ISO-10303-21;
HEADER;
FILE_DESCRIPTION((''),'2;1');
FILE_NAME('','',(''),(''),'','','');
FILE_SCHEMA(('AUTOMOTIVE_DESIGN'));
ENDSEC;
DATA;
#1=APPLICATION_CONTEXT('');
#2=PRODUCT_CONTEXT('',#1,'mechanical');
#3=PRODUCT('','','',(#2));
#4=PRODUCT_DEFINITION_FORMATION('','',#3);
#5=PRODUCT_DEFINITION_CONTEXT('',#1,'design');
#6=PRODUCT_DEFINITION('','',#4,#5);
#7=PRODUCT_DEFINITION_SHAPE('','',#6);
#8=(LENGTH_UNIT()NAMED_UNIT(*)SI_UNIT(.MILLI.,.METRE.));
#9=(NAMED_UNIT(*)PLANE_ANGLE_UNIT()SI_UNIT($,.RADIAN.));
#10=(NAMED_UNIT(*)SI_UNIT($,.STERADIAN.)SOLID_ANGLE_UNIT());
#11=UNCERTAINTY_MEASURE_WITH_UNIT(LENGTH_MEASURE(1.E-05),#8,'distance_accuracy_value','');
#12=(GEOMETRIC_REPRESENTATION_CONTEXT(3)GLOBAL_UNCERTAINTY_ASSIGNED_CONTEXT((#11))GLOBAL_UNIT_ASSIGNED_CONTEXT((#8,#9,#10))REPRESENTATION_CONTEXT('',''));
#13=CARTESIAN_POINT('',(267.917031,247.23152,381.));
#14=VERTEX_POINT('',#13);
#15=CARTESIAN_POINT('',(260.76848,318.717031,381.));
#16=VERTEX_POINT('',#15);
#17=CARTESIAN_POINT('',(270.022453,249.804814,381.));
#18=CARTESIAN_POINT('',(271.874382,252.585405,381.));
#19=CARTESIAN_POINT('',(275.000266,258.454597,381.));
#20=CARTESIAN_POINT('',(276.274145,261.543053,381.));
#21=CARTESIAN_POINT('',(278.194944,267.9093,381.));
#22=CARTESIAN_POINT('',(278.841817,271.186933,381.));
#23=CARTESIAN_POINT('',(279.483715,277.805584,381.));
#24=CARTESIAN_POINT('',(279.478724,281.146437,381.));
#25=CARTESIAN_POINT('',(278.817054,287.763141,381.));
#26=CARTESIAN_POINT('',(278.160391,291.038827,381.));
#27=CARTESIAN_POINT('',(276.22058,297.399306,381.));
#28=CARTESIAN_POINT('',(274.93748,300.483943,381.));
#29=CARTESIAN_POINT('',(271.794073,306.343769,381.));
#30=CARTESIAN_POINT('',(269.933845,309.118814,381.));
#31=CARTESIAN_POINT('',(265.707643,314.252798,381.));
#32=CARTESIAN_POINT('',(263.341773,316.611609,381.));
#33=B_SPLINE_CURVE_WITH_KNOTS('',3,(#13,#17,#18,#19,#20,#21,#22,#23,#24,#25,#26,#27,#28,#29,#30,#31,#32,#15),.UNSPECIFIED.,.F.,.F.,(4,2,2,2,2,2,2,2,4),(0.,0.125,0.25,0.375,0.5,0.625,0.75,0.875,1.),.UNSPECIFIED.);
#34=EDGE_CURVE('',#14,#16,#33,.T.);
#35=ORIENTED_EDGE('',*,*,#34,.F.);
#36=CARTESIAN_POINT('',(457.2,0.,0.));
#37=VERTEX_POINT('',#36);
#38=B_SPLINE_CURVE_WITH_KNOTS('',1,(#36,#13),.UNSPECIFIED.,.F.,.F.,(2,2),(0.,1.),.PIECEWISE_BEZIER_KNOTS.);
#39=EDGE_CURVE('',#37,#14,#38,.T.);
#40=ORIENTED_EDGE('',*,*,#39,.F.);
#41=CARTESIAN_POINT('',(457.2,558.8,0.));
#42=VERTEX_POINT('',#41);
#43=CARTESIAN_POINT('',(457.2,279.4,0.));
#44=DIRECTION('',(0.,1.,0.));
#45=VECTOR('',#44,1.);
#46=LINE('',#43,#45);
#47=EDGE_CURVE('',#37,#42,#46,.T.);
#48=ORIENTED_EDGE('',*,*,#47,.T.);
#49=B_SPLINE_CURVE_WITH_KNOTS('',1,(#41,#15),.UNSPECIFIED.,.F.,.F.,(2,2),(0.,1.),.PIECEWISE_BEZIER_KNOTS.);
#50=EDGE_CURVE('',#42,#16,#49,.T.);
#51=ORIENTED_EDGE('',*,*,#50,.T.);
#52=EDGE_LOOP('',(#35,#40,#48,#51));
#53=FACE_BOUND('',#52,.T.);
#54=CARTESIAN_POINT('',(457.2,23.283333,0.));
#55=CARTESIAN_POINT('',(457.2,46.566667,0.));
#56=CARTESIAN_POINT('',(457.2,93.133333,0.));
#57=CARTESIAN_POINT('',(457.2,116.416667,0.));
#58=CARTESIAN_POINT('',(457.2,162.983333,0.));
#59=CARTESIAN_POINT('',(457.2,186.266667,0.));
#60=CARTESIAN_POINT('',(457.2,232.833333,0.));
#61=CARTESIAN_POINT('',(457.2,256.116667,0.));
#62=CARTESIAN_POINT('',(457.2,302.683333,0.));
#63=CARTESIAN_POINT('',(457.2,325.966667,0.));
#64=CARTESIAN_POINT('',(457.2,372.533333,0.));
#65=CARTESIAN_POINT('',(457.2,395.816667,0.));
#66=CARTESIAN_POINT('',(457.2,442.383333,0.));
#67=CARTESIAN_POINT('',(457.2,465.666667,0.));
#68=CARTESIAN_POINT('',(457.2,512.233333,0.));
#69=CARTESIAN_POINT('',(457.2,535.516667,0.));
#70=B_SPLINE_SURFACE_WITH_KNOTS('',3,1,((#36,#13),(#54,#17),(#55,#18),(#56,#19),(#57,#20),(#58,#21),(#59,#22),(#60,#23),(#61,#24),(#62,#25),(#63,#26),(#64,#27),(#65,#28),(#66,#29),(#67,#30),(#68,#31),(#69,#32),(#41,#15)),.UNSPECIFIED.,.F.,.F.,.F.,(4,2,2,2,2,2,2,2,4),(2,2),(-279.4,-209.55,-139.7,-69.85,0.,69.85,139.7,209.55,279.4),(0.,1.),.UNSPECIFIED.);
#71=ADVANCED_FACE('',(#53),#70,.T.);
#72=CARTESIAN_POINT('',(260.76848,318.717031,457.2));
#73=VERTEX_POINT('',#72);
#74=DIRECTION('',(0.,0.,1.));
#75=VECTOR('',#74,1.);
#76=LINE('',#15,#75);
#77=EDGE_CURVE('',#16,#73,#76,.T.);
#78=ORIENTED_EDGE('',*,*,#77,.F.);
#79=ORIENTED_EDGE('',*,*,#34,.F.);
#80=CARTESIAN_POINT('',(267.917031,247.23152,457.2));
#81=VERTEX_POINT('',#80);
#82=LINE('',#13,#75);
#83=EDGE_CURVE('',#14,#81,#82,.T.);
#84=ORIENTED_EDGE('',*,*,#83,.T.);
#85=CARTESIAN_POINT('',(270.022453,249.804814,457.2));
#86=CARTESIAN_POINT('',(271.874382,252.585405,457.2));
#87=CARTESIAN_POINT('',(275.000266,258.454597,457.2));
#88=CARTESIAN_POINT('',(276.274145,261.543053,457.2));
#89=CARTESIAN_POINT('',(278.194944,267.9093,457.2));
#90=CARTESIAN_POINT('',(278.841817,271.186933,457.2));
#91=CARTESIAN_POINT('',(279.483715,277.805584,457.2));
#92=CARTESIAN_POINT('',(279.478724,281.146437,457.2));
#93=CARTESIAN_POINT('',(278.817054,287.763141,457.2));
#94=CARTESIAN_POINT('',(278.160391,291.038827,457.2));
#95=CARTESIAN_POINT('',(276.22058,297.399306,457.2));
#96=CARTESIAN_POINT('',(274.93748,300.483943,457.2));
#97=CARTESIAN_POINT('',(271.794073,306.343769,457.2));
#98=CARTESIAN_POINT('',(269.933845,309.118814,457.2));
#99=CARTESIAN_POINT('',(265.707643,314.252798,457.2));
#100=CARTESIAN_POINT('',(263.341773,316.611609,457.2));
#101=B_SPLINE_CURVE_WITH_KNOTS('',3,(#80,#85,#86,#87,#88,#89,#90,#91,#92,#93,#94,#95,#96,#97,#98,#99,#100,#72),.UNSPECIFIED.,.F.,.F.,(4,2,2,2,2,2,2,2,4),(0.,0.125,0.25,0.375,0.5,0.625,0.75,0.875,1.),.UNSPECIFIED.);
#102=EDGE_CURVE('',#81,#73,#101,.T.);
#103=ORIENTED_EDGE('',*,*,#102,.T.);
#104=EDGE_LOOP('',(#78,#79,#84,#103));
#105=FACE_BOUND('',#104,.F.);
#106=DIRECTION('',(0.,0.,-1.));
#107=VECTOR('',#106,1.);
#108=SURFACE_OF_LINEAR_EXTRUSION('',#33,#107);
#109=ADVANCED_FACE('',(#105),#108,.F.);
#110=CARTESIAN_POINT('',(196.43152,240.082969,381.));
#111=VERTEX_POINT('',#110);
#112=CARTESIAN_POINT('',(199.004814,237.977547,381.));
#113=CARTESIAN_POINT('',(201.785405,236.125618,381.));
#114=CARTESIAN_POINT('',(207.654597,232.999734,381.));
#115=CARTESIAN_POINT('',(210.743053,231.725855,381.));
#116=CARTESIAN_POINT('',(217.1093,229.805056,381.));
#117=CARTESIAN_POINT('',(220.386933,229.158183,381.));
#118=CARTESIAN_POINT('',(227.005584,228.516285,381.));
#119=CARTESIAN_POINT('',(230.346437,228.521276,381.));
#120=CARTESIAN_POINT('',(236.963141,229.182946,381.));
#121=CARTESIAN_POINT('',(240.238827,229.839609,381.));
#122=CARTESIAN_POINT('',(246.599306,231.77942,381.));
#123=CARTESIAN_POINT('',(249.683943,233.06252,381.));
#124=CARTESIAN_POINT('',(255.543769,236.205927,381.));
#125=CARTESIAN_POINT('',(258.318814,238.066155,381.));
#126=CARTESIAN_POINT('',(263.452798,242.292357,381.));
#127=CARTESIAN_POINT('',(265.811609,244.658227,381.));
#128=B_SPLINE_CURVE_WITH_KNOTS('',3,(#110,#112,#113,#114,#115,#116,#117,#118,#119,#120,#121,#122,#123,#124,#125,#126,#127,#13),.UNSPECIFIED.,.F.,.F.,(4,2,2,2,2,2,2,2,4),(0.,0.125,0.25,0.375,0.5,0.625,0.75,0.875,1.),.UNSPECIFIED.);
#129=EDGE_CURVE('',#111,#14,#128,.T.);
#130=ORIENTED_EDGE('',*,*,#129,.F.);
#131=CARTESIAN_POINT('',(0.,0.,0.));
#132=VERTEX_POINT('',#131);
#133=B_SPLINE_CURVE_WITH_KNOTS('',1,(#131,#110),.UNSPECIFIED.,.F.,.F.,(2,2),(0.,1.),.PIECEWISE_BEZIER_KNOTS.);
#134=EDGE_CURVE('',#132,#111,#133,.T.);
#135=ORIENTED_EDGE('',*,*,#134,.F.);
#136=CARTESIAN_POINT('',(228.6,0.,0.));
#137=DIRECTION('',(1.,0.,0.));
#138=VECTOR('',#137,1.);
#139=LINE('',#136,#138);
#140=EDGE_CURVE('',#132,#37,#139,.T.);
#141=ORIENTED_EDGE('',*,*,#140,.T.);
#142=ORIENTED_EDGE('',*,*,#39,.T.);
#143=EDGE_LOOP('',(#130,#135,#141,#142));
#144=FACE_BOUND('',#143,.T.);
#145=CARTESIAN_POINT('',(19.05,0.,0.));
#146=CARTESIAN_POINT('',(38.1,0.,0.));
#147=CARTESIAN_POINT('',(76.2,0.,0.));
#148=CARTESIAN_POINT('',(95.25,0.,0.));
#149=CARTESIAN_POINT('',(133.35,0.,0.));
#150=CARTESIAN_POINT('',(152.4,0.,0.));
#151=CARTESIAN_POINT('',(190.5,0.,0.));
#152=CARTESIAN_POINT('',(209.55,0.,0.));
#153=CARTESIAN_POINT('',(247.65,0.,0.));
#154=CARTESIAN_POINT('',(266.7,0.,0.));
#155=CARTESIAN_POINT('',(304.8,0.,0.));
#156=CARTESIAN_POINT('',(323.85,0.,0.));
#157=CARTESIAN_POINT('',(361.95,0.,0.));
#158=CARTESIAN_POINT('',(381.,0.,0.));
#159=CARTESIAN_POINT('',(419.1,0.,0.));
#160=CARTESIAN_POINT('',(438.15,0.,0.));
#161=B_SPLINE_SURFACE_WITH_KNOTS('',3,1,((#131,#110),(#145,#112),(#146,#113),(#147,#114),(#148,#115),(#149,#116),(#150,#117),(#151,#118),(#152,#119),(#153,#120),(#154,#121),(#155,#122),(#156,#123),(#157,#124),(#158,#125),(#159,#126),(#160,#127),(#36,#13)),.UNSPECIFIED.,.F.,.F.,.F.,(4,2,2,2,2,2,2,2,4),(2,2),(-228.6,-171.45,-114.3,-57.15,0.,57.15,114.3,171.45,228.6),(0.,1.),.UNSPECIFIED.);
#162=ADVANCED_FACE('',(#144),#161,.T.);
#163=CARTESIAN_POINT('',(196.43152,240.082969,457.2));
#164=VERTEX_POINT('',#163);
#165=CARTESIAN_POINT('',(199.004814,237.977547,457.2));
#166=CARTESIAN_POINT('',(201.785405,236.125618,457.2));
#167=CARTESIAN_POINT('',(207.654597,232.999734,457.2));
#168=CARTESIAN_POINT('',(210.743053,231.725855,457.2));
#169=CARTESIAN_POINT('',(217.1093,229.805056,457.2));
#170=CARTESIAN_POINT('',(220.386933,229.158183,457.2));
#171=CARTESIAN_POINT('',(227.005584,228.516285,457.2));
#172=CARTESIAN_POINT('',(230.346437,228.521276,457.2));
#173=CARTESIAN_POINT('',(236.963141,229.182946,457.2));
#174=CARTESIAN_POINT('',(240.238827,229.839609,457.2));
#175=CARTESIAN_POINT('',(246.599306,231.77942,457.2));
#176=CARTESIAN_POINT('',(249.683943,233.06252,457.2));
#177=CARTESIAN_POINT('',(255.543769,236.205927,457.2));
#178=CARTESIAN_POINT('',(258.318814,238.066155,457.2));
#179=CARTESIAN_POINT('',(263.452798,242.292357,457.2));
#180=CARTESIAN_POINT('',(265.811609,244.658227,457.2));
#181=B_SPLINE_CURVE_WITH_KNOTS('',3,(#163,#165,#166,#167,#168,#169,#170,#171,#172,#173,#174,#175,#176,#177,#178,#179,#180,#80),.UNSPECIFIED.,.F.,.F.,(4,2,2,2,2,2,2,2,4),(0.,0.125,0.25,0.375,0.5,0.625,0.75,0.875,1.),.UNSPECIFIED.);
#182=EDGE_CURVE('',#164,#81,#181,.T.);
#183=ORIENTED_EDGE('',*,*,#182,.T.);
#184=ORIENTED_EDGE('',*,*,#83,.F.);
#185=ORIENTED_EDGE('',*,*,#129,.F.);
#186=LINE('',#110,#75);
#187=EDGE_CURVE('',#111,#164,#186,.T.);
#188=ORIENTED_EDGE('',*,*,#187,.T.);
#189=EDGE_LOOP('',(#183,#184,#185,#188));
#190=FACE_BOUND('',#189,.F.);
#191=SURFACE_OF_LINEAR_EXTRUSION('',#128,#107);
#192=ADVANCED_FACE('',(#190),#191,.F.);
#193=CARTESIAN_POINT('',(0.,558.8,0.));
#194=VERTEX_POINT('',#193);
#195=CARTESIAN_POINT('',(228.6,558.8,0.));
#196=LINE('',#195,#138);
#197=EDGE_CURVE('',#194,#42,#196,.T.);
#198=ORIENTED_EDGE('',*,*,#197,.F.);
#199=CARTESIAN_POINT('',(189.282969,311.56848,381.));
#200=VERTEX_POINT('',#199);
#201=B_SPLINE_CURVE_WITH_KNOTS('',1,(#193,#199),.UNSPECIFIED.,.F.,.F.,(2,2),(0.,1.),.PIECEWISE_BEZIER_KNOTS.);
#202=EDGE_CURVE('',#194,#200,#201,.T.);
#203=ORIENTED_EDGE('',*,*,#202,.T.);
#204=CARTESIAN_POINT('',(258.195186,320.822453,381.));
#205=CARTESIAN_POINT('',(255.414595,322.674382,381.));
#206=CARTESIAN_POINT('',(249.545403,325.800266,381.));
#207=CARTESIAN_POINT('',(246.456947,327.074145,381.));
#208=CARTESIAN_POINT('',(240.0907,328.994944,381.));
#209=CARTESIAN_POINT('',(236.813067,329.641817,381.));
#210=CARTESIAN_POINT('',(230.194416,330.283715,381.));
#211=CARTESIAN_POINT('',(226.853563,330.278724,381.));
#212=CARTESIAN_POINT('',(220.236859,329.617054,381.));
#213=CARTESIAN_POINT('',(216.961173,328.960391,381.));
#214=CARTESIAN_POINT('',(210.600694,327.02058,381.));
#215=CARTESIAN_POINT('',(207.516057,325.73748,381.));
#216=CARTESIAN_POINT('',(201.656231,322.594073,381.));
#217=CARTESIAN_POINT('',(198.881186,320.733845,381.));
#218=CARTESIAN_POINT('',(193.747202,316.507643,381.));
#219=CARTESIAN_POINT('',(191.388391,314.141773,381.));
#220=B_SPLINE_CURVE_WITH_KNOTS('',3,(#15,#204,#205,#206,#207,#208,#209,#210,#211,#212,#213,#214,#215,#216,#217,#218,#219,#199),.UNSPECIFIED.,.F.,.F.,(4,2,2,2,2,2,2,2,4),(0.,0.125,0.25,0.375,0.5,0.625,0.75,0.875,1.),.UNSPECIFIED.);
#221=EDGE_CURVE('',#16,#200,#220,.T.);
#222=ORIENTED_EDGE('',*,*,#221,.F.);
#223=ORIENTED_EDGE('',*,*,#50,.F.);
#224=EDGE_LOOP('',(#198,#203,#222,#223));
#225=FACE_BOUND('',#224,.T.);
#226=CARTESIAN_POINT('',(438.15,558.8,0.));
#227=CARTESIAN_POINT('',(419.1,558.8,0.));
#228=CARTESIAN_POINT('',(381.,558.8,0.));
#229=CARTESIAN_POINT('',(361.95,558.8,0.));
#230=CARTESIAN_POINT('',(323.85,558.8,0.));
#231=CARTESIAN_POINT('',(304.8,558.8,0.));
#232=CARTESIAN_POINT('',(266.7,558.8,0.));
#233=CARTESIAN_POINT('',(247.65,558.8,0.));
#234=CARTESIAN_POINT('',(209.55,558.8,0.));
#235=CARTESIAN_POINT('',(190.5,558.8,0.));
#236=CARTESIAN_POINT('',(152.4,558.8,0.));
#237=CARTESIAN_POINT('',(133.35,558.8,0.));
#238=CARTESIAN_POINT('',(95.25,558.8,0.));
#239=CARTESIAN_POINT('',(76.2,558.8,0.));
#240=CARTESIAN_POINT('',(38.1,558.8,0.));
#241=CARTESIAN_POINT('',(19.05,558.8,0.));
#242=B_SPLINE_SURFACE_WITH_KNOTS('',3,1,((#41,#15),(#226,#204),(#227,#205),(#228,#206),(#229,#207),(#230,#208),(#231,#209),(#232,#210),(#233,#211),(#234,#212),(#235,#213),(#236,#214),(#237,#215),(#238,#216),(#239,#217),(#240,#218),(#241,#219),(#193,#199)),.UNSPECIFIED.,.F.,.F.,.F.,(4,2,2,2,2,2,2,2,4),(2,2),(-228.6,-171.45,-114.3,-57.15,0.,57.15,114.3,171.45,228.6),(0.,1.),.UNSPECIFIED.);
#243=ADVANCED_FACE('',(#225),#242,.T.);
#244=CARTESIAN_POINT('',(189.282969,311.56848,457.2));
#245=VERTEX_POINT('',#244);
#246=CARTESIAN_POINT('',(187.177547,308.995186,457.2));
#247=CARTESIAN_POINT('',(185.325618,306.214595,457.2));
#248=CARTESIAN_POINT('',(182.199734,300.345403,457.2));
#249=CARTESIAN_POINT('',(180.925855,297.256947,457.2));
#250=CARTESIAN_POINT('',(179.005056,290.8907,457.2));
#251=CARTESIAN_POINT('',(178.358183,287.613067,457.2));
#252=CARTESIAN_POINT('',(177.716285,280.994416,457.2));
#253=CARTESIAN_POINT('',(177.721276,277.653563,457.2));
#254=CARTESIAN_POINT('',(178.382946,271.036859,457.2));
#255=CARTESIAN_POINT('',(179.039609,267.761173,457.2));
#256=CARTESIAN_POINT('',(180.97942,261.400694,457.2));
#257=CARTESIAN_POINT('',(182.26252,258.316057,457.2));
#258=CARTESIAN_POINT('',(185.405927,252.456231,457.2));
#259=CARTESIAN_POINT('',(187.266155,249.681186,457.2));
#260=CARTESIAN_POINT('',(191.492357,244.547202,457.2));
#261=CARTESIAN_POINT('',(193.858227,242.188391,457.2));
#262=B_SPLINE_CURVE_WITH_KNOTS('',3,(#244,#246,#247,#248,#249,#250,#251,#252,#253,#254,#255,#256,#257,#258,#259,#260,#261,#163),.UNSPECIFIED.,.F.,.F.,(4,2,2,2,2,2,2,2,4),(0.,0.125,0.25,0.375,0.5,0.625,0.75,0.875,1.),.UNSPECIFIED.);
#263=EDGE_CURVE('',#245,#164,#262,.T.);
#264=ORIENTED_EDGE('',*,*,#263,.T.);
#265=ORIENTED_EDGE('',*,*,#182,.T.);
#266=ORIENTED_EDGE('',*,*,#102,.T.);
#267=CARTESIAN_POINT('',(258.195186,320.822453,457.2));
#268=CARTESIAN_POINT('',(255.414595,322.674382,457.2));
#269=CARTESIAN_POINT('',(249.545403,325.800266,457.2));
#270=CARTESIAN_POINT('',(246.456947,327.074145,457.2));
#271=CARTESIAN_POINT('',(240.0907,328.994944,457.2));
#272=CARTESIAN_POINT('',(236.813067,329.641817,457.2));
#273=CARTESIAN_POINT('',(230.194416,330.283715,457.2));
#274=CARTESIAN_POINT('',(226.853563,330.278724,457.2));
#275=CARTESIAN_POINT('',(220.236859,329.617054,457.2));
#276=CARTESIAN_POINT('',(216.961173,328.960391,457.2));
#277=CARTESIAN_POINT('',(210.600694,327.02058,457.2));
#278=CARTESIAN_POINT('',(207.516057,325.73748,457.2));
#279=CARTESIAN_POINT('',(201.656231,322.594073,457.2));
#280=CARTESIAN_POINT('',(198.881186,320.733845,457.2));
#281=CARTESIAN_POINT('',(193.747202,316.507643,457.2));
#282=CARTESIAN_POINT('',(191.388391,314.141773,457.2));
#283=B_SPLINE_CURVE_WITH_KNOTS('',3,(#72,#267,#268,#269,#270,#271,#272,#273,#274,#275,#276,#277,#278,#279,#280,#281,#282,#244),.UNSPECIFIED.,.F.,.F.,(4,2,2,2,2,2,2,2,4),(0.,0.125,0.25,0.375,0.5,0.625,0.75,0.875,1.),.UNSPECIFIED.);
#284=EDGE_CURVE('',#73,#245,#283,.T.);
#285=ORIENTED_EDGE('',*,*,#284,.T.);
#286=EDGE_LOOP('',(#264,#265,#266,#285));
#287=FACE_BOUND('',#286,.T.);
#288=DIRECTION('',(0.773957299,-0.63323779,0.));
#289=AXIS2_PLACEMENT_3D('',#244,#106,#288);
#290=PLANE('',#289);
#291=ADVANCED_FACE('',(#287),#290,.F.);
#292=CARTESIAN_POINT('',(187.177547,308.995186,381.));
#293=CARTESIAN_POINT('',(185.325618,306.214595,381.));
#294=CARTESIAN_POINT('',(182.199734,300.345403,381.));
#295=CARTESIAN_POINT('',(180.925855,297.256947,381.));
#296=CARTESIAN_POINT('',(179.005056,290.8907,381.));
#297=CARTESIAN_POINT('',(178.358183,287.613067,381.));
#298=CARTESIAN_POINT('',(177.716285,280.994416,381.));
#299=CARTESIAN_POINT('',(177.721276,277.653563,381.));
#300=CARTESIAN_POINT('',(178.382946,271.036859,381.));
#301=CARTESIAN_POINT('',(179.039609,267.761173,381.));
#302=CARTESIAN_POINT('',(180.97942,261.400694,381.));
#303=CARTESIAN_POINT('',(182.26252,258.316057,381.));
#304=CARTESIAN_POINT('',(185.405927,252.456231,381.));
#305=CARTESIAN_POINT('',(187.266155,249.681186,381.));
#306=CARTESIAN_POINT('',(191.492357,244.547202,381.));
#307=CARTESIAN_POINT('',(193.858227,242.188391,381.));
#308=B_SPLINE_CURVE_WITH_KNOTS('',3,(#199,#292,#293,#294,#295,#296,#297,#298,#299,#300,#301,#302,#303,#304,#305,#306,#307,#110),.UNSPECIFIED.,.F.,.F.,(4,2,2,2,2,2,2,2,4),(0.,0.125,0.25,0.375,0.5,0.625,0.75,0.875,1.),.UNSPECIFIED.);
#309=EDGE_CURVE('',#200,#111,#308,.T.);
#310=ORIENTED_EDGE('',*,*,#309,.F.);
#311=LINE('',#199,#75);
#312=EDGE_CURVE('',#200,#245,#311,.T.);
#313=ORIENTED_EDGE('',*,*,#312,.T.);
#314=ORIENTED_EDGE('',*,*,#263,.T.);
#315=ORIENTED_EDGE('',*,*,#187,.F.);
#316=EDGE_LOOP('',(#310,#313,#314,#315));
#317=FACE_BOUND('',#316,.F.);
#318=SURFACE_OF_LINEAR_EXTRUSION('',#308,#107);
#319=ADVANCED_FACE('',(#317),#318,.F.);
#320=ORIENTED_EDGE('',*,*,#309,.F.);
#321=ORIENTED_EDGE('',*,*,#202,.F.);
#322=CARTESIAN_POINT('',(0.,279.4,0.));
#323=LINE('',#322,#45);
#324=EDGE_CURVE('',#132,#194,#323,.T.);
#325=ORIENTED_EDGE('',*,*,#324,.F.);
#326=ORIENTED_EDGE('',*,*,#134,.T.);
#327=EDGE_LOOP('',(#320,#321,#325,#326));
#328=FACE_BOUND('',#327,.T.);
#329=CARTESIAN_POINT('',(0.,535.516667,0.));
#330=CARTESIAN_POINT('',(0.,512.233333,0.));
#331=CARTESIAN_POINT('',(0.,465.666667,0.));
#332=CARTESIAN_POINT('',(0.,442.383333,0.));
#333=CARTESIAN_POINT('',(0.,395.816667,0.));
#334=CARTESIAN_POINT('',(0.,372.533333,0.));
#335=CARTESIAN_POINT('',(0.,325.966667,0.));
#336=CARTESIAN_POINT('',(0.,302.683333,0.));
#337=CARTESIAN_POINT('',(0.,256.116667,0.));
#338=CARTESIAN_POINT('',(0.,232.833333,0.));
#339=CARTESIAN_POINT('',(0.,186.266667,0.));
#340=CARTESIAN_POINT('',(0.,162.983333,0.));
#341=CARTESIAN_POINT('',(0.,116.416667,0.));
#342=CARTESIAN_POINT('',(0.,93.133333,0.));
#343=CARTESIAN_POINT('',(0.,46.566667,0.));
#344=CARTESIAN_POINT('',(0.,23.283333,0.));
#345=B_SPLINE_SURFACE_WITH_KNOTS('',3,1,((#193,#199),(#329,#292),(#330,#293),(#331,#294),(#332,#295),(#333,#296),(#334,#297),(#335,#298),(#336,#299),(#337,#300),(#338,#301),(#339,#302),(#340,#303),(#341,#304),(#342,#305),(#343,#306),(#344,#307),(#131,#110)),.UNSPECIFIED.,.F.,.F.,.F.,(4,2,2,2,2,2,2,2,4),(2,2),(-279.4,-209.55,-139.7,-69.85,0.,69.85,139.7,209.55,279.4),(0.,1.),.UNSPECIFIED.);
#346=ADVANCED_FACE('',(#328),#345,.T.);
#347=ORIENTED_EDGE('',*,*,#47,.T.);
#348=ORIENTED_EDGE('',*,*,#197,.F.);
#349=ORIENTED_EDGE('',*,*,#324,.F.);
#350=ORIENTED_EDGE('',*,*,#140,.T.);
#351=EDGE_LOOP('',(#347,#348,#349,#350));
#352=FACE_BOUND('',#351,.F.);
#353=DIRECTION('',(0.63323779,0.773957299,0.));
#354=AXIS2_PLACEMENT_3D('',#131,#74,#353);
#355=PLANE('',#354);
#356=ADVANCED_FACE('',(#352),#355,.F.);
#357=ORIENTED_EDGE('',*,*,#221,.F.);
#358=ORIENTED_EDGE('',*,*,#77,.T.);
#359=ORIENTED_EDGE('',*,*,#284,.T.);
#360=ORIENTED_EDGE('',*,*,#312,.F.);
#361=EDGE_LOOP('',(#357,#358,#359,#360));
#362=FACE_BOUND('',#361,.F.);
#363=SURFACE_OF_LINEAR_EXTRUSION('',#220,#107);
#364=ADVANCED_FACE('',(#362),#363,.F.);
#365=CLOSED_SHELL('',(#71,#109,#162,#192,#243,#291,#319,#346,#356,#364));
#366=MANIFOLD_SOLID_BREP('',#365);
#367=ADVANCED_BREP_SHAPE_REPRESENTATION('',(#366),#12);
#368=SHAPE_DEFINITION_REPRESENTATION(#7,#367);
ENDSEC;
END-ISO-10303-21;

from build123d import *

# Parameters (mm, degrees)
F0_W     = 457.2
F0_H     = 558.8
F4_DEPTH = 76.2


# Not quite as in the source:
# - the arcs of a loft's sections are written as splines that run evenly, so that the points pair up as in the source's solid


with BuildPart() as f3:
    # F0 (on Top) → F3 section 0
    with BuildSketch(Plane.XY):
        with Locations((228.6, 279.4)):
            Rectangle(F0_W, F0_H)
    # F2 (on offset) → F3 section 1
    with BuildSketch(Plane.XY.offset(381)):
        with BuildLine():
            add(Edge.make_bspline(
                [(196.4315202549, 240.0829692005), (199.0048139033, 237.9775471245), (201.7854047693, 236.125618145), (207.6545967757, 232.9997335558), (210.7430527889, 231.7258552398), (217.1092997477, 229.805056205), (220.3869332755, 229.1581829817), (227.0055838864, 228.516284731), (230.3464373104, 228.5212755757), (236.9631405421, 229.1829458989), (240.2388267389, 229.8396090163), (246.599306397, 231.7794202939), (249.6839425829, 233.0625204885), (255.5437690011, 236.205926861), (258.3188143375, 238.066155312), (263.4527976727, 242.2923574354), (265.8116087236, 244.6582266066), (267.9170307995, 247.2315202549)],
                knots=[0, 0, 0, 0, 0.125, 0.125, 0.25, 0.25, 0.375, 0.375, 0.5, 0.5, 0.625, 0.625, 0.75, 0.75, 0.875, 0.875, 1, 1, 1, 1], degree=3))
            add(Edge.make_bspline(
                [(267.9170307995, 247.2315202549), (270.0224528755, 249.8048139033), (271.874381855, 252.5854047693), (275.0002664442, 258.4545967757), (276.2741447602, 261.5430527889), (278.194943795, 267.9092997477), (278.8418170183, 271.1869332755), (279.483715269, 277.8055838864), (279.4787244243, 281.1464373104), (278.8170541011, 287.7631405421), (278.1603909837, 291.0388267389), (276.2205797061, 297.399306397), (274.9374795115, 300.4839425829), (271.794073139, 306.3437690011), (269.933844688, 309.1188143375), (265.7076425646, 314.2527976727), (263.3417733934, 316.6116087236), (260.7684797451, 318.7170307995)],
                knots=[0, 0, 0, 0, 0.125, 0.125, 0.25, 0.25, 0.375, 0.375, 0.5, 0.5, 0.625, 0.625, 0.75, 0.75, 0.875, 0.875, 1, 1, 1, 1], degree=3))
            add(Edge.make_bspline(
                [(260.7684797451, 318.7170307995), (258.1951860967, 320.8224528755), (255.4145952307, 322.674381855), (249.5454032243, 325.8002664442), (246.4569472111, 327.0741447602), (240.0907002523, 328.994943795), (236.8130667245, 329.6418170183), (230.1944161136, 330.283715269), (226.8535626896, 330.2787244243), (220.2368594579, 329.6170541011), (216.9611732611, 328.9603909837), (210.600693603, 327.0205797061), (207.5160574171, 325.7374795115), (201.6562309989, 322.594073139), (198.8811856625, 320.733844688), (193.7472023273, 316.5076425646), (191.3883912764, 314.1417733934), (189.2829692005, 311.5684797451)],
                knots=[0, 0, 0, 0, 0.125, 0.125, 0.25, 0.25, 0.375, 0.375, 0.5, 0.5, 0.625, 0.625, 0.75, 0.75, 0.875, 0.875, 1, 1, 1, 1], degree=3))
            add(Edge.make_bspline(
                [(189.2829692005, 311.5684797451), (187.1775471245, 308.9951860967), (185.325618145, 306.2145952307), (182.1997335558, 300.3454032243), (180.9258552398, 297.2569472111), (179.005056205, 290.8907002523), (178.3581829817, 287.6130667245), (177.716284731, 280.9944161136), (177.7212755757, 277.6535626896), (178.3829458989, 271.0368594579), (179.0396090163, 267.7611732611), (180.9794202939, 261.400693603), (182.2625204885, 258.3160574171), (185.405926861, 252.4562309989), (187.266155312, 249.6811856625), (191.4923574354, 244.5472023273), (193.8582266066, 242.1883912764), (196.4315202549, 240.0829692005)],
                knots=[0, 0, 0, 0, 0.125, 0.125, 0.25, 0.25, 0.375, 0.375, 0.5, 0.5, 0.625, 0.625, 0.75, 0.75, 0.875, 0.875, 1, 1, 1, 1], degree=3))
        make_face()
    loft(ruled=True)

    # F4 (add): a face of the model
    f4_faces = [f3.faces().sort_by_distance(p)[0] for p in [
        (228.6, 279.4, 381),
    ]]
    extrude(f4_faces, amount=F4_DEPTH)


solid = f3.part
